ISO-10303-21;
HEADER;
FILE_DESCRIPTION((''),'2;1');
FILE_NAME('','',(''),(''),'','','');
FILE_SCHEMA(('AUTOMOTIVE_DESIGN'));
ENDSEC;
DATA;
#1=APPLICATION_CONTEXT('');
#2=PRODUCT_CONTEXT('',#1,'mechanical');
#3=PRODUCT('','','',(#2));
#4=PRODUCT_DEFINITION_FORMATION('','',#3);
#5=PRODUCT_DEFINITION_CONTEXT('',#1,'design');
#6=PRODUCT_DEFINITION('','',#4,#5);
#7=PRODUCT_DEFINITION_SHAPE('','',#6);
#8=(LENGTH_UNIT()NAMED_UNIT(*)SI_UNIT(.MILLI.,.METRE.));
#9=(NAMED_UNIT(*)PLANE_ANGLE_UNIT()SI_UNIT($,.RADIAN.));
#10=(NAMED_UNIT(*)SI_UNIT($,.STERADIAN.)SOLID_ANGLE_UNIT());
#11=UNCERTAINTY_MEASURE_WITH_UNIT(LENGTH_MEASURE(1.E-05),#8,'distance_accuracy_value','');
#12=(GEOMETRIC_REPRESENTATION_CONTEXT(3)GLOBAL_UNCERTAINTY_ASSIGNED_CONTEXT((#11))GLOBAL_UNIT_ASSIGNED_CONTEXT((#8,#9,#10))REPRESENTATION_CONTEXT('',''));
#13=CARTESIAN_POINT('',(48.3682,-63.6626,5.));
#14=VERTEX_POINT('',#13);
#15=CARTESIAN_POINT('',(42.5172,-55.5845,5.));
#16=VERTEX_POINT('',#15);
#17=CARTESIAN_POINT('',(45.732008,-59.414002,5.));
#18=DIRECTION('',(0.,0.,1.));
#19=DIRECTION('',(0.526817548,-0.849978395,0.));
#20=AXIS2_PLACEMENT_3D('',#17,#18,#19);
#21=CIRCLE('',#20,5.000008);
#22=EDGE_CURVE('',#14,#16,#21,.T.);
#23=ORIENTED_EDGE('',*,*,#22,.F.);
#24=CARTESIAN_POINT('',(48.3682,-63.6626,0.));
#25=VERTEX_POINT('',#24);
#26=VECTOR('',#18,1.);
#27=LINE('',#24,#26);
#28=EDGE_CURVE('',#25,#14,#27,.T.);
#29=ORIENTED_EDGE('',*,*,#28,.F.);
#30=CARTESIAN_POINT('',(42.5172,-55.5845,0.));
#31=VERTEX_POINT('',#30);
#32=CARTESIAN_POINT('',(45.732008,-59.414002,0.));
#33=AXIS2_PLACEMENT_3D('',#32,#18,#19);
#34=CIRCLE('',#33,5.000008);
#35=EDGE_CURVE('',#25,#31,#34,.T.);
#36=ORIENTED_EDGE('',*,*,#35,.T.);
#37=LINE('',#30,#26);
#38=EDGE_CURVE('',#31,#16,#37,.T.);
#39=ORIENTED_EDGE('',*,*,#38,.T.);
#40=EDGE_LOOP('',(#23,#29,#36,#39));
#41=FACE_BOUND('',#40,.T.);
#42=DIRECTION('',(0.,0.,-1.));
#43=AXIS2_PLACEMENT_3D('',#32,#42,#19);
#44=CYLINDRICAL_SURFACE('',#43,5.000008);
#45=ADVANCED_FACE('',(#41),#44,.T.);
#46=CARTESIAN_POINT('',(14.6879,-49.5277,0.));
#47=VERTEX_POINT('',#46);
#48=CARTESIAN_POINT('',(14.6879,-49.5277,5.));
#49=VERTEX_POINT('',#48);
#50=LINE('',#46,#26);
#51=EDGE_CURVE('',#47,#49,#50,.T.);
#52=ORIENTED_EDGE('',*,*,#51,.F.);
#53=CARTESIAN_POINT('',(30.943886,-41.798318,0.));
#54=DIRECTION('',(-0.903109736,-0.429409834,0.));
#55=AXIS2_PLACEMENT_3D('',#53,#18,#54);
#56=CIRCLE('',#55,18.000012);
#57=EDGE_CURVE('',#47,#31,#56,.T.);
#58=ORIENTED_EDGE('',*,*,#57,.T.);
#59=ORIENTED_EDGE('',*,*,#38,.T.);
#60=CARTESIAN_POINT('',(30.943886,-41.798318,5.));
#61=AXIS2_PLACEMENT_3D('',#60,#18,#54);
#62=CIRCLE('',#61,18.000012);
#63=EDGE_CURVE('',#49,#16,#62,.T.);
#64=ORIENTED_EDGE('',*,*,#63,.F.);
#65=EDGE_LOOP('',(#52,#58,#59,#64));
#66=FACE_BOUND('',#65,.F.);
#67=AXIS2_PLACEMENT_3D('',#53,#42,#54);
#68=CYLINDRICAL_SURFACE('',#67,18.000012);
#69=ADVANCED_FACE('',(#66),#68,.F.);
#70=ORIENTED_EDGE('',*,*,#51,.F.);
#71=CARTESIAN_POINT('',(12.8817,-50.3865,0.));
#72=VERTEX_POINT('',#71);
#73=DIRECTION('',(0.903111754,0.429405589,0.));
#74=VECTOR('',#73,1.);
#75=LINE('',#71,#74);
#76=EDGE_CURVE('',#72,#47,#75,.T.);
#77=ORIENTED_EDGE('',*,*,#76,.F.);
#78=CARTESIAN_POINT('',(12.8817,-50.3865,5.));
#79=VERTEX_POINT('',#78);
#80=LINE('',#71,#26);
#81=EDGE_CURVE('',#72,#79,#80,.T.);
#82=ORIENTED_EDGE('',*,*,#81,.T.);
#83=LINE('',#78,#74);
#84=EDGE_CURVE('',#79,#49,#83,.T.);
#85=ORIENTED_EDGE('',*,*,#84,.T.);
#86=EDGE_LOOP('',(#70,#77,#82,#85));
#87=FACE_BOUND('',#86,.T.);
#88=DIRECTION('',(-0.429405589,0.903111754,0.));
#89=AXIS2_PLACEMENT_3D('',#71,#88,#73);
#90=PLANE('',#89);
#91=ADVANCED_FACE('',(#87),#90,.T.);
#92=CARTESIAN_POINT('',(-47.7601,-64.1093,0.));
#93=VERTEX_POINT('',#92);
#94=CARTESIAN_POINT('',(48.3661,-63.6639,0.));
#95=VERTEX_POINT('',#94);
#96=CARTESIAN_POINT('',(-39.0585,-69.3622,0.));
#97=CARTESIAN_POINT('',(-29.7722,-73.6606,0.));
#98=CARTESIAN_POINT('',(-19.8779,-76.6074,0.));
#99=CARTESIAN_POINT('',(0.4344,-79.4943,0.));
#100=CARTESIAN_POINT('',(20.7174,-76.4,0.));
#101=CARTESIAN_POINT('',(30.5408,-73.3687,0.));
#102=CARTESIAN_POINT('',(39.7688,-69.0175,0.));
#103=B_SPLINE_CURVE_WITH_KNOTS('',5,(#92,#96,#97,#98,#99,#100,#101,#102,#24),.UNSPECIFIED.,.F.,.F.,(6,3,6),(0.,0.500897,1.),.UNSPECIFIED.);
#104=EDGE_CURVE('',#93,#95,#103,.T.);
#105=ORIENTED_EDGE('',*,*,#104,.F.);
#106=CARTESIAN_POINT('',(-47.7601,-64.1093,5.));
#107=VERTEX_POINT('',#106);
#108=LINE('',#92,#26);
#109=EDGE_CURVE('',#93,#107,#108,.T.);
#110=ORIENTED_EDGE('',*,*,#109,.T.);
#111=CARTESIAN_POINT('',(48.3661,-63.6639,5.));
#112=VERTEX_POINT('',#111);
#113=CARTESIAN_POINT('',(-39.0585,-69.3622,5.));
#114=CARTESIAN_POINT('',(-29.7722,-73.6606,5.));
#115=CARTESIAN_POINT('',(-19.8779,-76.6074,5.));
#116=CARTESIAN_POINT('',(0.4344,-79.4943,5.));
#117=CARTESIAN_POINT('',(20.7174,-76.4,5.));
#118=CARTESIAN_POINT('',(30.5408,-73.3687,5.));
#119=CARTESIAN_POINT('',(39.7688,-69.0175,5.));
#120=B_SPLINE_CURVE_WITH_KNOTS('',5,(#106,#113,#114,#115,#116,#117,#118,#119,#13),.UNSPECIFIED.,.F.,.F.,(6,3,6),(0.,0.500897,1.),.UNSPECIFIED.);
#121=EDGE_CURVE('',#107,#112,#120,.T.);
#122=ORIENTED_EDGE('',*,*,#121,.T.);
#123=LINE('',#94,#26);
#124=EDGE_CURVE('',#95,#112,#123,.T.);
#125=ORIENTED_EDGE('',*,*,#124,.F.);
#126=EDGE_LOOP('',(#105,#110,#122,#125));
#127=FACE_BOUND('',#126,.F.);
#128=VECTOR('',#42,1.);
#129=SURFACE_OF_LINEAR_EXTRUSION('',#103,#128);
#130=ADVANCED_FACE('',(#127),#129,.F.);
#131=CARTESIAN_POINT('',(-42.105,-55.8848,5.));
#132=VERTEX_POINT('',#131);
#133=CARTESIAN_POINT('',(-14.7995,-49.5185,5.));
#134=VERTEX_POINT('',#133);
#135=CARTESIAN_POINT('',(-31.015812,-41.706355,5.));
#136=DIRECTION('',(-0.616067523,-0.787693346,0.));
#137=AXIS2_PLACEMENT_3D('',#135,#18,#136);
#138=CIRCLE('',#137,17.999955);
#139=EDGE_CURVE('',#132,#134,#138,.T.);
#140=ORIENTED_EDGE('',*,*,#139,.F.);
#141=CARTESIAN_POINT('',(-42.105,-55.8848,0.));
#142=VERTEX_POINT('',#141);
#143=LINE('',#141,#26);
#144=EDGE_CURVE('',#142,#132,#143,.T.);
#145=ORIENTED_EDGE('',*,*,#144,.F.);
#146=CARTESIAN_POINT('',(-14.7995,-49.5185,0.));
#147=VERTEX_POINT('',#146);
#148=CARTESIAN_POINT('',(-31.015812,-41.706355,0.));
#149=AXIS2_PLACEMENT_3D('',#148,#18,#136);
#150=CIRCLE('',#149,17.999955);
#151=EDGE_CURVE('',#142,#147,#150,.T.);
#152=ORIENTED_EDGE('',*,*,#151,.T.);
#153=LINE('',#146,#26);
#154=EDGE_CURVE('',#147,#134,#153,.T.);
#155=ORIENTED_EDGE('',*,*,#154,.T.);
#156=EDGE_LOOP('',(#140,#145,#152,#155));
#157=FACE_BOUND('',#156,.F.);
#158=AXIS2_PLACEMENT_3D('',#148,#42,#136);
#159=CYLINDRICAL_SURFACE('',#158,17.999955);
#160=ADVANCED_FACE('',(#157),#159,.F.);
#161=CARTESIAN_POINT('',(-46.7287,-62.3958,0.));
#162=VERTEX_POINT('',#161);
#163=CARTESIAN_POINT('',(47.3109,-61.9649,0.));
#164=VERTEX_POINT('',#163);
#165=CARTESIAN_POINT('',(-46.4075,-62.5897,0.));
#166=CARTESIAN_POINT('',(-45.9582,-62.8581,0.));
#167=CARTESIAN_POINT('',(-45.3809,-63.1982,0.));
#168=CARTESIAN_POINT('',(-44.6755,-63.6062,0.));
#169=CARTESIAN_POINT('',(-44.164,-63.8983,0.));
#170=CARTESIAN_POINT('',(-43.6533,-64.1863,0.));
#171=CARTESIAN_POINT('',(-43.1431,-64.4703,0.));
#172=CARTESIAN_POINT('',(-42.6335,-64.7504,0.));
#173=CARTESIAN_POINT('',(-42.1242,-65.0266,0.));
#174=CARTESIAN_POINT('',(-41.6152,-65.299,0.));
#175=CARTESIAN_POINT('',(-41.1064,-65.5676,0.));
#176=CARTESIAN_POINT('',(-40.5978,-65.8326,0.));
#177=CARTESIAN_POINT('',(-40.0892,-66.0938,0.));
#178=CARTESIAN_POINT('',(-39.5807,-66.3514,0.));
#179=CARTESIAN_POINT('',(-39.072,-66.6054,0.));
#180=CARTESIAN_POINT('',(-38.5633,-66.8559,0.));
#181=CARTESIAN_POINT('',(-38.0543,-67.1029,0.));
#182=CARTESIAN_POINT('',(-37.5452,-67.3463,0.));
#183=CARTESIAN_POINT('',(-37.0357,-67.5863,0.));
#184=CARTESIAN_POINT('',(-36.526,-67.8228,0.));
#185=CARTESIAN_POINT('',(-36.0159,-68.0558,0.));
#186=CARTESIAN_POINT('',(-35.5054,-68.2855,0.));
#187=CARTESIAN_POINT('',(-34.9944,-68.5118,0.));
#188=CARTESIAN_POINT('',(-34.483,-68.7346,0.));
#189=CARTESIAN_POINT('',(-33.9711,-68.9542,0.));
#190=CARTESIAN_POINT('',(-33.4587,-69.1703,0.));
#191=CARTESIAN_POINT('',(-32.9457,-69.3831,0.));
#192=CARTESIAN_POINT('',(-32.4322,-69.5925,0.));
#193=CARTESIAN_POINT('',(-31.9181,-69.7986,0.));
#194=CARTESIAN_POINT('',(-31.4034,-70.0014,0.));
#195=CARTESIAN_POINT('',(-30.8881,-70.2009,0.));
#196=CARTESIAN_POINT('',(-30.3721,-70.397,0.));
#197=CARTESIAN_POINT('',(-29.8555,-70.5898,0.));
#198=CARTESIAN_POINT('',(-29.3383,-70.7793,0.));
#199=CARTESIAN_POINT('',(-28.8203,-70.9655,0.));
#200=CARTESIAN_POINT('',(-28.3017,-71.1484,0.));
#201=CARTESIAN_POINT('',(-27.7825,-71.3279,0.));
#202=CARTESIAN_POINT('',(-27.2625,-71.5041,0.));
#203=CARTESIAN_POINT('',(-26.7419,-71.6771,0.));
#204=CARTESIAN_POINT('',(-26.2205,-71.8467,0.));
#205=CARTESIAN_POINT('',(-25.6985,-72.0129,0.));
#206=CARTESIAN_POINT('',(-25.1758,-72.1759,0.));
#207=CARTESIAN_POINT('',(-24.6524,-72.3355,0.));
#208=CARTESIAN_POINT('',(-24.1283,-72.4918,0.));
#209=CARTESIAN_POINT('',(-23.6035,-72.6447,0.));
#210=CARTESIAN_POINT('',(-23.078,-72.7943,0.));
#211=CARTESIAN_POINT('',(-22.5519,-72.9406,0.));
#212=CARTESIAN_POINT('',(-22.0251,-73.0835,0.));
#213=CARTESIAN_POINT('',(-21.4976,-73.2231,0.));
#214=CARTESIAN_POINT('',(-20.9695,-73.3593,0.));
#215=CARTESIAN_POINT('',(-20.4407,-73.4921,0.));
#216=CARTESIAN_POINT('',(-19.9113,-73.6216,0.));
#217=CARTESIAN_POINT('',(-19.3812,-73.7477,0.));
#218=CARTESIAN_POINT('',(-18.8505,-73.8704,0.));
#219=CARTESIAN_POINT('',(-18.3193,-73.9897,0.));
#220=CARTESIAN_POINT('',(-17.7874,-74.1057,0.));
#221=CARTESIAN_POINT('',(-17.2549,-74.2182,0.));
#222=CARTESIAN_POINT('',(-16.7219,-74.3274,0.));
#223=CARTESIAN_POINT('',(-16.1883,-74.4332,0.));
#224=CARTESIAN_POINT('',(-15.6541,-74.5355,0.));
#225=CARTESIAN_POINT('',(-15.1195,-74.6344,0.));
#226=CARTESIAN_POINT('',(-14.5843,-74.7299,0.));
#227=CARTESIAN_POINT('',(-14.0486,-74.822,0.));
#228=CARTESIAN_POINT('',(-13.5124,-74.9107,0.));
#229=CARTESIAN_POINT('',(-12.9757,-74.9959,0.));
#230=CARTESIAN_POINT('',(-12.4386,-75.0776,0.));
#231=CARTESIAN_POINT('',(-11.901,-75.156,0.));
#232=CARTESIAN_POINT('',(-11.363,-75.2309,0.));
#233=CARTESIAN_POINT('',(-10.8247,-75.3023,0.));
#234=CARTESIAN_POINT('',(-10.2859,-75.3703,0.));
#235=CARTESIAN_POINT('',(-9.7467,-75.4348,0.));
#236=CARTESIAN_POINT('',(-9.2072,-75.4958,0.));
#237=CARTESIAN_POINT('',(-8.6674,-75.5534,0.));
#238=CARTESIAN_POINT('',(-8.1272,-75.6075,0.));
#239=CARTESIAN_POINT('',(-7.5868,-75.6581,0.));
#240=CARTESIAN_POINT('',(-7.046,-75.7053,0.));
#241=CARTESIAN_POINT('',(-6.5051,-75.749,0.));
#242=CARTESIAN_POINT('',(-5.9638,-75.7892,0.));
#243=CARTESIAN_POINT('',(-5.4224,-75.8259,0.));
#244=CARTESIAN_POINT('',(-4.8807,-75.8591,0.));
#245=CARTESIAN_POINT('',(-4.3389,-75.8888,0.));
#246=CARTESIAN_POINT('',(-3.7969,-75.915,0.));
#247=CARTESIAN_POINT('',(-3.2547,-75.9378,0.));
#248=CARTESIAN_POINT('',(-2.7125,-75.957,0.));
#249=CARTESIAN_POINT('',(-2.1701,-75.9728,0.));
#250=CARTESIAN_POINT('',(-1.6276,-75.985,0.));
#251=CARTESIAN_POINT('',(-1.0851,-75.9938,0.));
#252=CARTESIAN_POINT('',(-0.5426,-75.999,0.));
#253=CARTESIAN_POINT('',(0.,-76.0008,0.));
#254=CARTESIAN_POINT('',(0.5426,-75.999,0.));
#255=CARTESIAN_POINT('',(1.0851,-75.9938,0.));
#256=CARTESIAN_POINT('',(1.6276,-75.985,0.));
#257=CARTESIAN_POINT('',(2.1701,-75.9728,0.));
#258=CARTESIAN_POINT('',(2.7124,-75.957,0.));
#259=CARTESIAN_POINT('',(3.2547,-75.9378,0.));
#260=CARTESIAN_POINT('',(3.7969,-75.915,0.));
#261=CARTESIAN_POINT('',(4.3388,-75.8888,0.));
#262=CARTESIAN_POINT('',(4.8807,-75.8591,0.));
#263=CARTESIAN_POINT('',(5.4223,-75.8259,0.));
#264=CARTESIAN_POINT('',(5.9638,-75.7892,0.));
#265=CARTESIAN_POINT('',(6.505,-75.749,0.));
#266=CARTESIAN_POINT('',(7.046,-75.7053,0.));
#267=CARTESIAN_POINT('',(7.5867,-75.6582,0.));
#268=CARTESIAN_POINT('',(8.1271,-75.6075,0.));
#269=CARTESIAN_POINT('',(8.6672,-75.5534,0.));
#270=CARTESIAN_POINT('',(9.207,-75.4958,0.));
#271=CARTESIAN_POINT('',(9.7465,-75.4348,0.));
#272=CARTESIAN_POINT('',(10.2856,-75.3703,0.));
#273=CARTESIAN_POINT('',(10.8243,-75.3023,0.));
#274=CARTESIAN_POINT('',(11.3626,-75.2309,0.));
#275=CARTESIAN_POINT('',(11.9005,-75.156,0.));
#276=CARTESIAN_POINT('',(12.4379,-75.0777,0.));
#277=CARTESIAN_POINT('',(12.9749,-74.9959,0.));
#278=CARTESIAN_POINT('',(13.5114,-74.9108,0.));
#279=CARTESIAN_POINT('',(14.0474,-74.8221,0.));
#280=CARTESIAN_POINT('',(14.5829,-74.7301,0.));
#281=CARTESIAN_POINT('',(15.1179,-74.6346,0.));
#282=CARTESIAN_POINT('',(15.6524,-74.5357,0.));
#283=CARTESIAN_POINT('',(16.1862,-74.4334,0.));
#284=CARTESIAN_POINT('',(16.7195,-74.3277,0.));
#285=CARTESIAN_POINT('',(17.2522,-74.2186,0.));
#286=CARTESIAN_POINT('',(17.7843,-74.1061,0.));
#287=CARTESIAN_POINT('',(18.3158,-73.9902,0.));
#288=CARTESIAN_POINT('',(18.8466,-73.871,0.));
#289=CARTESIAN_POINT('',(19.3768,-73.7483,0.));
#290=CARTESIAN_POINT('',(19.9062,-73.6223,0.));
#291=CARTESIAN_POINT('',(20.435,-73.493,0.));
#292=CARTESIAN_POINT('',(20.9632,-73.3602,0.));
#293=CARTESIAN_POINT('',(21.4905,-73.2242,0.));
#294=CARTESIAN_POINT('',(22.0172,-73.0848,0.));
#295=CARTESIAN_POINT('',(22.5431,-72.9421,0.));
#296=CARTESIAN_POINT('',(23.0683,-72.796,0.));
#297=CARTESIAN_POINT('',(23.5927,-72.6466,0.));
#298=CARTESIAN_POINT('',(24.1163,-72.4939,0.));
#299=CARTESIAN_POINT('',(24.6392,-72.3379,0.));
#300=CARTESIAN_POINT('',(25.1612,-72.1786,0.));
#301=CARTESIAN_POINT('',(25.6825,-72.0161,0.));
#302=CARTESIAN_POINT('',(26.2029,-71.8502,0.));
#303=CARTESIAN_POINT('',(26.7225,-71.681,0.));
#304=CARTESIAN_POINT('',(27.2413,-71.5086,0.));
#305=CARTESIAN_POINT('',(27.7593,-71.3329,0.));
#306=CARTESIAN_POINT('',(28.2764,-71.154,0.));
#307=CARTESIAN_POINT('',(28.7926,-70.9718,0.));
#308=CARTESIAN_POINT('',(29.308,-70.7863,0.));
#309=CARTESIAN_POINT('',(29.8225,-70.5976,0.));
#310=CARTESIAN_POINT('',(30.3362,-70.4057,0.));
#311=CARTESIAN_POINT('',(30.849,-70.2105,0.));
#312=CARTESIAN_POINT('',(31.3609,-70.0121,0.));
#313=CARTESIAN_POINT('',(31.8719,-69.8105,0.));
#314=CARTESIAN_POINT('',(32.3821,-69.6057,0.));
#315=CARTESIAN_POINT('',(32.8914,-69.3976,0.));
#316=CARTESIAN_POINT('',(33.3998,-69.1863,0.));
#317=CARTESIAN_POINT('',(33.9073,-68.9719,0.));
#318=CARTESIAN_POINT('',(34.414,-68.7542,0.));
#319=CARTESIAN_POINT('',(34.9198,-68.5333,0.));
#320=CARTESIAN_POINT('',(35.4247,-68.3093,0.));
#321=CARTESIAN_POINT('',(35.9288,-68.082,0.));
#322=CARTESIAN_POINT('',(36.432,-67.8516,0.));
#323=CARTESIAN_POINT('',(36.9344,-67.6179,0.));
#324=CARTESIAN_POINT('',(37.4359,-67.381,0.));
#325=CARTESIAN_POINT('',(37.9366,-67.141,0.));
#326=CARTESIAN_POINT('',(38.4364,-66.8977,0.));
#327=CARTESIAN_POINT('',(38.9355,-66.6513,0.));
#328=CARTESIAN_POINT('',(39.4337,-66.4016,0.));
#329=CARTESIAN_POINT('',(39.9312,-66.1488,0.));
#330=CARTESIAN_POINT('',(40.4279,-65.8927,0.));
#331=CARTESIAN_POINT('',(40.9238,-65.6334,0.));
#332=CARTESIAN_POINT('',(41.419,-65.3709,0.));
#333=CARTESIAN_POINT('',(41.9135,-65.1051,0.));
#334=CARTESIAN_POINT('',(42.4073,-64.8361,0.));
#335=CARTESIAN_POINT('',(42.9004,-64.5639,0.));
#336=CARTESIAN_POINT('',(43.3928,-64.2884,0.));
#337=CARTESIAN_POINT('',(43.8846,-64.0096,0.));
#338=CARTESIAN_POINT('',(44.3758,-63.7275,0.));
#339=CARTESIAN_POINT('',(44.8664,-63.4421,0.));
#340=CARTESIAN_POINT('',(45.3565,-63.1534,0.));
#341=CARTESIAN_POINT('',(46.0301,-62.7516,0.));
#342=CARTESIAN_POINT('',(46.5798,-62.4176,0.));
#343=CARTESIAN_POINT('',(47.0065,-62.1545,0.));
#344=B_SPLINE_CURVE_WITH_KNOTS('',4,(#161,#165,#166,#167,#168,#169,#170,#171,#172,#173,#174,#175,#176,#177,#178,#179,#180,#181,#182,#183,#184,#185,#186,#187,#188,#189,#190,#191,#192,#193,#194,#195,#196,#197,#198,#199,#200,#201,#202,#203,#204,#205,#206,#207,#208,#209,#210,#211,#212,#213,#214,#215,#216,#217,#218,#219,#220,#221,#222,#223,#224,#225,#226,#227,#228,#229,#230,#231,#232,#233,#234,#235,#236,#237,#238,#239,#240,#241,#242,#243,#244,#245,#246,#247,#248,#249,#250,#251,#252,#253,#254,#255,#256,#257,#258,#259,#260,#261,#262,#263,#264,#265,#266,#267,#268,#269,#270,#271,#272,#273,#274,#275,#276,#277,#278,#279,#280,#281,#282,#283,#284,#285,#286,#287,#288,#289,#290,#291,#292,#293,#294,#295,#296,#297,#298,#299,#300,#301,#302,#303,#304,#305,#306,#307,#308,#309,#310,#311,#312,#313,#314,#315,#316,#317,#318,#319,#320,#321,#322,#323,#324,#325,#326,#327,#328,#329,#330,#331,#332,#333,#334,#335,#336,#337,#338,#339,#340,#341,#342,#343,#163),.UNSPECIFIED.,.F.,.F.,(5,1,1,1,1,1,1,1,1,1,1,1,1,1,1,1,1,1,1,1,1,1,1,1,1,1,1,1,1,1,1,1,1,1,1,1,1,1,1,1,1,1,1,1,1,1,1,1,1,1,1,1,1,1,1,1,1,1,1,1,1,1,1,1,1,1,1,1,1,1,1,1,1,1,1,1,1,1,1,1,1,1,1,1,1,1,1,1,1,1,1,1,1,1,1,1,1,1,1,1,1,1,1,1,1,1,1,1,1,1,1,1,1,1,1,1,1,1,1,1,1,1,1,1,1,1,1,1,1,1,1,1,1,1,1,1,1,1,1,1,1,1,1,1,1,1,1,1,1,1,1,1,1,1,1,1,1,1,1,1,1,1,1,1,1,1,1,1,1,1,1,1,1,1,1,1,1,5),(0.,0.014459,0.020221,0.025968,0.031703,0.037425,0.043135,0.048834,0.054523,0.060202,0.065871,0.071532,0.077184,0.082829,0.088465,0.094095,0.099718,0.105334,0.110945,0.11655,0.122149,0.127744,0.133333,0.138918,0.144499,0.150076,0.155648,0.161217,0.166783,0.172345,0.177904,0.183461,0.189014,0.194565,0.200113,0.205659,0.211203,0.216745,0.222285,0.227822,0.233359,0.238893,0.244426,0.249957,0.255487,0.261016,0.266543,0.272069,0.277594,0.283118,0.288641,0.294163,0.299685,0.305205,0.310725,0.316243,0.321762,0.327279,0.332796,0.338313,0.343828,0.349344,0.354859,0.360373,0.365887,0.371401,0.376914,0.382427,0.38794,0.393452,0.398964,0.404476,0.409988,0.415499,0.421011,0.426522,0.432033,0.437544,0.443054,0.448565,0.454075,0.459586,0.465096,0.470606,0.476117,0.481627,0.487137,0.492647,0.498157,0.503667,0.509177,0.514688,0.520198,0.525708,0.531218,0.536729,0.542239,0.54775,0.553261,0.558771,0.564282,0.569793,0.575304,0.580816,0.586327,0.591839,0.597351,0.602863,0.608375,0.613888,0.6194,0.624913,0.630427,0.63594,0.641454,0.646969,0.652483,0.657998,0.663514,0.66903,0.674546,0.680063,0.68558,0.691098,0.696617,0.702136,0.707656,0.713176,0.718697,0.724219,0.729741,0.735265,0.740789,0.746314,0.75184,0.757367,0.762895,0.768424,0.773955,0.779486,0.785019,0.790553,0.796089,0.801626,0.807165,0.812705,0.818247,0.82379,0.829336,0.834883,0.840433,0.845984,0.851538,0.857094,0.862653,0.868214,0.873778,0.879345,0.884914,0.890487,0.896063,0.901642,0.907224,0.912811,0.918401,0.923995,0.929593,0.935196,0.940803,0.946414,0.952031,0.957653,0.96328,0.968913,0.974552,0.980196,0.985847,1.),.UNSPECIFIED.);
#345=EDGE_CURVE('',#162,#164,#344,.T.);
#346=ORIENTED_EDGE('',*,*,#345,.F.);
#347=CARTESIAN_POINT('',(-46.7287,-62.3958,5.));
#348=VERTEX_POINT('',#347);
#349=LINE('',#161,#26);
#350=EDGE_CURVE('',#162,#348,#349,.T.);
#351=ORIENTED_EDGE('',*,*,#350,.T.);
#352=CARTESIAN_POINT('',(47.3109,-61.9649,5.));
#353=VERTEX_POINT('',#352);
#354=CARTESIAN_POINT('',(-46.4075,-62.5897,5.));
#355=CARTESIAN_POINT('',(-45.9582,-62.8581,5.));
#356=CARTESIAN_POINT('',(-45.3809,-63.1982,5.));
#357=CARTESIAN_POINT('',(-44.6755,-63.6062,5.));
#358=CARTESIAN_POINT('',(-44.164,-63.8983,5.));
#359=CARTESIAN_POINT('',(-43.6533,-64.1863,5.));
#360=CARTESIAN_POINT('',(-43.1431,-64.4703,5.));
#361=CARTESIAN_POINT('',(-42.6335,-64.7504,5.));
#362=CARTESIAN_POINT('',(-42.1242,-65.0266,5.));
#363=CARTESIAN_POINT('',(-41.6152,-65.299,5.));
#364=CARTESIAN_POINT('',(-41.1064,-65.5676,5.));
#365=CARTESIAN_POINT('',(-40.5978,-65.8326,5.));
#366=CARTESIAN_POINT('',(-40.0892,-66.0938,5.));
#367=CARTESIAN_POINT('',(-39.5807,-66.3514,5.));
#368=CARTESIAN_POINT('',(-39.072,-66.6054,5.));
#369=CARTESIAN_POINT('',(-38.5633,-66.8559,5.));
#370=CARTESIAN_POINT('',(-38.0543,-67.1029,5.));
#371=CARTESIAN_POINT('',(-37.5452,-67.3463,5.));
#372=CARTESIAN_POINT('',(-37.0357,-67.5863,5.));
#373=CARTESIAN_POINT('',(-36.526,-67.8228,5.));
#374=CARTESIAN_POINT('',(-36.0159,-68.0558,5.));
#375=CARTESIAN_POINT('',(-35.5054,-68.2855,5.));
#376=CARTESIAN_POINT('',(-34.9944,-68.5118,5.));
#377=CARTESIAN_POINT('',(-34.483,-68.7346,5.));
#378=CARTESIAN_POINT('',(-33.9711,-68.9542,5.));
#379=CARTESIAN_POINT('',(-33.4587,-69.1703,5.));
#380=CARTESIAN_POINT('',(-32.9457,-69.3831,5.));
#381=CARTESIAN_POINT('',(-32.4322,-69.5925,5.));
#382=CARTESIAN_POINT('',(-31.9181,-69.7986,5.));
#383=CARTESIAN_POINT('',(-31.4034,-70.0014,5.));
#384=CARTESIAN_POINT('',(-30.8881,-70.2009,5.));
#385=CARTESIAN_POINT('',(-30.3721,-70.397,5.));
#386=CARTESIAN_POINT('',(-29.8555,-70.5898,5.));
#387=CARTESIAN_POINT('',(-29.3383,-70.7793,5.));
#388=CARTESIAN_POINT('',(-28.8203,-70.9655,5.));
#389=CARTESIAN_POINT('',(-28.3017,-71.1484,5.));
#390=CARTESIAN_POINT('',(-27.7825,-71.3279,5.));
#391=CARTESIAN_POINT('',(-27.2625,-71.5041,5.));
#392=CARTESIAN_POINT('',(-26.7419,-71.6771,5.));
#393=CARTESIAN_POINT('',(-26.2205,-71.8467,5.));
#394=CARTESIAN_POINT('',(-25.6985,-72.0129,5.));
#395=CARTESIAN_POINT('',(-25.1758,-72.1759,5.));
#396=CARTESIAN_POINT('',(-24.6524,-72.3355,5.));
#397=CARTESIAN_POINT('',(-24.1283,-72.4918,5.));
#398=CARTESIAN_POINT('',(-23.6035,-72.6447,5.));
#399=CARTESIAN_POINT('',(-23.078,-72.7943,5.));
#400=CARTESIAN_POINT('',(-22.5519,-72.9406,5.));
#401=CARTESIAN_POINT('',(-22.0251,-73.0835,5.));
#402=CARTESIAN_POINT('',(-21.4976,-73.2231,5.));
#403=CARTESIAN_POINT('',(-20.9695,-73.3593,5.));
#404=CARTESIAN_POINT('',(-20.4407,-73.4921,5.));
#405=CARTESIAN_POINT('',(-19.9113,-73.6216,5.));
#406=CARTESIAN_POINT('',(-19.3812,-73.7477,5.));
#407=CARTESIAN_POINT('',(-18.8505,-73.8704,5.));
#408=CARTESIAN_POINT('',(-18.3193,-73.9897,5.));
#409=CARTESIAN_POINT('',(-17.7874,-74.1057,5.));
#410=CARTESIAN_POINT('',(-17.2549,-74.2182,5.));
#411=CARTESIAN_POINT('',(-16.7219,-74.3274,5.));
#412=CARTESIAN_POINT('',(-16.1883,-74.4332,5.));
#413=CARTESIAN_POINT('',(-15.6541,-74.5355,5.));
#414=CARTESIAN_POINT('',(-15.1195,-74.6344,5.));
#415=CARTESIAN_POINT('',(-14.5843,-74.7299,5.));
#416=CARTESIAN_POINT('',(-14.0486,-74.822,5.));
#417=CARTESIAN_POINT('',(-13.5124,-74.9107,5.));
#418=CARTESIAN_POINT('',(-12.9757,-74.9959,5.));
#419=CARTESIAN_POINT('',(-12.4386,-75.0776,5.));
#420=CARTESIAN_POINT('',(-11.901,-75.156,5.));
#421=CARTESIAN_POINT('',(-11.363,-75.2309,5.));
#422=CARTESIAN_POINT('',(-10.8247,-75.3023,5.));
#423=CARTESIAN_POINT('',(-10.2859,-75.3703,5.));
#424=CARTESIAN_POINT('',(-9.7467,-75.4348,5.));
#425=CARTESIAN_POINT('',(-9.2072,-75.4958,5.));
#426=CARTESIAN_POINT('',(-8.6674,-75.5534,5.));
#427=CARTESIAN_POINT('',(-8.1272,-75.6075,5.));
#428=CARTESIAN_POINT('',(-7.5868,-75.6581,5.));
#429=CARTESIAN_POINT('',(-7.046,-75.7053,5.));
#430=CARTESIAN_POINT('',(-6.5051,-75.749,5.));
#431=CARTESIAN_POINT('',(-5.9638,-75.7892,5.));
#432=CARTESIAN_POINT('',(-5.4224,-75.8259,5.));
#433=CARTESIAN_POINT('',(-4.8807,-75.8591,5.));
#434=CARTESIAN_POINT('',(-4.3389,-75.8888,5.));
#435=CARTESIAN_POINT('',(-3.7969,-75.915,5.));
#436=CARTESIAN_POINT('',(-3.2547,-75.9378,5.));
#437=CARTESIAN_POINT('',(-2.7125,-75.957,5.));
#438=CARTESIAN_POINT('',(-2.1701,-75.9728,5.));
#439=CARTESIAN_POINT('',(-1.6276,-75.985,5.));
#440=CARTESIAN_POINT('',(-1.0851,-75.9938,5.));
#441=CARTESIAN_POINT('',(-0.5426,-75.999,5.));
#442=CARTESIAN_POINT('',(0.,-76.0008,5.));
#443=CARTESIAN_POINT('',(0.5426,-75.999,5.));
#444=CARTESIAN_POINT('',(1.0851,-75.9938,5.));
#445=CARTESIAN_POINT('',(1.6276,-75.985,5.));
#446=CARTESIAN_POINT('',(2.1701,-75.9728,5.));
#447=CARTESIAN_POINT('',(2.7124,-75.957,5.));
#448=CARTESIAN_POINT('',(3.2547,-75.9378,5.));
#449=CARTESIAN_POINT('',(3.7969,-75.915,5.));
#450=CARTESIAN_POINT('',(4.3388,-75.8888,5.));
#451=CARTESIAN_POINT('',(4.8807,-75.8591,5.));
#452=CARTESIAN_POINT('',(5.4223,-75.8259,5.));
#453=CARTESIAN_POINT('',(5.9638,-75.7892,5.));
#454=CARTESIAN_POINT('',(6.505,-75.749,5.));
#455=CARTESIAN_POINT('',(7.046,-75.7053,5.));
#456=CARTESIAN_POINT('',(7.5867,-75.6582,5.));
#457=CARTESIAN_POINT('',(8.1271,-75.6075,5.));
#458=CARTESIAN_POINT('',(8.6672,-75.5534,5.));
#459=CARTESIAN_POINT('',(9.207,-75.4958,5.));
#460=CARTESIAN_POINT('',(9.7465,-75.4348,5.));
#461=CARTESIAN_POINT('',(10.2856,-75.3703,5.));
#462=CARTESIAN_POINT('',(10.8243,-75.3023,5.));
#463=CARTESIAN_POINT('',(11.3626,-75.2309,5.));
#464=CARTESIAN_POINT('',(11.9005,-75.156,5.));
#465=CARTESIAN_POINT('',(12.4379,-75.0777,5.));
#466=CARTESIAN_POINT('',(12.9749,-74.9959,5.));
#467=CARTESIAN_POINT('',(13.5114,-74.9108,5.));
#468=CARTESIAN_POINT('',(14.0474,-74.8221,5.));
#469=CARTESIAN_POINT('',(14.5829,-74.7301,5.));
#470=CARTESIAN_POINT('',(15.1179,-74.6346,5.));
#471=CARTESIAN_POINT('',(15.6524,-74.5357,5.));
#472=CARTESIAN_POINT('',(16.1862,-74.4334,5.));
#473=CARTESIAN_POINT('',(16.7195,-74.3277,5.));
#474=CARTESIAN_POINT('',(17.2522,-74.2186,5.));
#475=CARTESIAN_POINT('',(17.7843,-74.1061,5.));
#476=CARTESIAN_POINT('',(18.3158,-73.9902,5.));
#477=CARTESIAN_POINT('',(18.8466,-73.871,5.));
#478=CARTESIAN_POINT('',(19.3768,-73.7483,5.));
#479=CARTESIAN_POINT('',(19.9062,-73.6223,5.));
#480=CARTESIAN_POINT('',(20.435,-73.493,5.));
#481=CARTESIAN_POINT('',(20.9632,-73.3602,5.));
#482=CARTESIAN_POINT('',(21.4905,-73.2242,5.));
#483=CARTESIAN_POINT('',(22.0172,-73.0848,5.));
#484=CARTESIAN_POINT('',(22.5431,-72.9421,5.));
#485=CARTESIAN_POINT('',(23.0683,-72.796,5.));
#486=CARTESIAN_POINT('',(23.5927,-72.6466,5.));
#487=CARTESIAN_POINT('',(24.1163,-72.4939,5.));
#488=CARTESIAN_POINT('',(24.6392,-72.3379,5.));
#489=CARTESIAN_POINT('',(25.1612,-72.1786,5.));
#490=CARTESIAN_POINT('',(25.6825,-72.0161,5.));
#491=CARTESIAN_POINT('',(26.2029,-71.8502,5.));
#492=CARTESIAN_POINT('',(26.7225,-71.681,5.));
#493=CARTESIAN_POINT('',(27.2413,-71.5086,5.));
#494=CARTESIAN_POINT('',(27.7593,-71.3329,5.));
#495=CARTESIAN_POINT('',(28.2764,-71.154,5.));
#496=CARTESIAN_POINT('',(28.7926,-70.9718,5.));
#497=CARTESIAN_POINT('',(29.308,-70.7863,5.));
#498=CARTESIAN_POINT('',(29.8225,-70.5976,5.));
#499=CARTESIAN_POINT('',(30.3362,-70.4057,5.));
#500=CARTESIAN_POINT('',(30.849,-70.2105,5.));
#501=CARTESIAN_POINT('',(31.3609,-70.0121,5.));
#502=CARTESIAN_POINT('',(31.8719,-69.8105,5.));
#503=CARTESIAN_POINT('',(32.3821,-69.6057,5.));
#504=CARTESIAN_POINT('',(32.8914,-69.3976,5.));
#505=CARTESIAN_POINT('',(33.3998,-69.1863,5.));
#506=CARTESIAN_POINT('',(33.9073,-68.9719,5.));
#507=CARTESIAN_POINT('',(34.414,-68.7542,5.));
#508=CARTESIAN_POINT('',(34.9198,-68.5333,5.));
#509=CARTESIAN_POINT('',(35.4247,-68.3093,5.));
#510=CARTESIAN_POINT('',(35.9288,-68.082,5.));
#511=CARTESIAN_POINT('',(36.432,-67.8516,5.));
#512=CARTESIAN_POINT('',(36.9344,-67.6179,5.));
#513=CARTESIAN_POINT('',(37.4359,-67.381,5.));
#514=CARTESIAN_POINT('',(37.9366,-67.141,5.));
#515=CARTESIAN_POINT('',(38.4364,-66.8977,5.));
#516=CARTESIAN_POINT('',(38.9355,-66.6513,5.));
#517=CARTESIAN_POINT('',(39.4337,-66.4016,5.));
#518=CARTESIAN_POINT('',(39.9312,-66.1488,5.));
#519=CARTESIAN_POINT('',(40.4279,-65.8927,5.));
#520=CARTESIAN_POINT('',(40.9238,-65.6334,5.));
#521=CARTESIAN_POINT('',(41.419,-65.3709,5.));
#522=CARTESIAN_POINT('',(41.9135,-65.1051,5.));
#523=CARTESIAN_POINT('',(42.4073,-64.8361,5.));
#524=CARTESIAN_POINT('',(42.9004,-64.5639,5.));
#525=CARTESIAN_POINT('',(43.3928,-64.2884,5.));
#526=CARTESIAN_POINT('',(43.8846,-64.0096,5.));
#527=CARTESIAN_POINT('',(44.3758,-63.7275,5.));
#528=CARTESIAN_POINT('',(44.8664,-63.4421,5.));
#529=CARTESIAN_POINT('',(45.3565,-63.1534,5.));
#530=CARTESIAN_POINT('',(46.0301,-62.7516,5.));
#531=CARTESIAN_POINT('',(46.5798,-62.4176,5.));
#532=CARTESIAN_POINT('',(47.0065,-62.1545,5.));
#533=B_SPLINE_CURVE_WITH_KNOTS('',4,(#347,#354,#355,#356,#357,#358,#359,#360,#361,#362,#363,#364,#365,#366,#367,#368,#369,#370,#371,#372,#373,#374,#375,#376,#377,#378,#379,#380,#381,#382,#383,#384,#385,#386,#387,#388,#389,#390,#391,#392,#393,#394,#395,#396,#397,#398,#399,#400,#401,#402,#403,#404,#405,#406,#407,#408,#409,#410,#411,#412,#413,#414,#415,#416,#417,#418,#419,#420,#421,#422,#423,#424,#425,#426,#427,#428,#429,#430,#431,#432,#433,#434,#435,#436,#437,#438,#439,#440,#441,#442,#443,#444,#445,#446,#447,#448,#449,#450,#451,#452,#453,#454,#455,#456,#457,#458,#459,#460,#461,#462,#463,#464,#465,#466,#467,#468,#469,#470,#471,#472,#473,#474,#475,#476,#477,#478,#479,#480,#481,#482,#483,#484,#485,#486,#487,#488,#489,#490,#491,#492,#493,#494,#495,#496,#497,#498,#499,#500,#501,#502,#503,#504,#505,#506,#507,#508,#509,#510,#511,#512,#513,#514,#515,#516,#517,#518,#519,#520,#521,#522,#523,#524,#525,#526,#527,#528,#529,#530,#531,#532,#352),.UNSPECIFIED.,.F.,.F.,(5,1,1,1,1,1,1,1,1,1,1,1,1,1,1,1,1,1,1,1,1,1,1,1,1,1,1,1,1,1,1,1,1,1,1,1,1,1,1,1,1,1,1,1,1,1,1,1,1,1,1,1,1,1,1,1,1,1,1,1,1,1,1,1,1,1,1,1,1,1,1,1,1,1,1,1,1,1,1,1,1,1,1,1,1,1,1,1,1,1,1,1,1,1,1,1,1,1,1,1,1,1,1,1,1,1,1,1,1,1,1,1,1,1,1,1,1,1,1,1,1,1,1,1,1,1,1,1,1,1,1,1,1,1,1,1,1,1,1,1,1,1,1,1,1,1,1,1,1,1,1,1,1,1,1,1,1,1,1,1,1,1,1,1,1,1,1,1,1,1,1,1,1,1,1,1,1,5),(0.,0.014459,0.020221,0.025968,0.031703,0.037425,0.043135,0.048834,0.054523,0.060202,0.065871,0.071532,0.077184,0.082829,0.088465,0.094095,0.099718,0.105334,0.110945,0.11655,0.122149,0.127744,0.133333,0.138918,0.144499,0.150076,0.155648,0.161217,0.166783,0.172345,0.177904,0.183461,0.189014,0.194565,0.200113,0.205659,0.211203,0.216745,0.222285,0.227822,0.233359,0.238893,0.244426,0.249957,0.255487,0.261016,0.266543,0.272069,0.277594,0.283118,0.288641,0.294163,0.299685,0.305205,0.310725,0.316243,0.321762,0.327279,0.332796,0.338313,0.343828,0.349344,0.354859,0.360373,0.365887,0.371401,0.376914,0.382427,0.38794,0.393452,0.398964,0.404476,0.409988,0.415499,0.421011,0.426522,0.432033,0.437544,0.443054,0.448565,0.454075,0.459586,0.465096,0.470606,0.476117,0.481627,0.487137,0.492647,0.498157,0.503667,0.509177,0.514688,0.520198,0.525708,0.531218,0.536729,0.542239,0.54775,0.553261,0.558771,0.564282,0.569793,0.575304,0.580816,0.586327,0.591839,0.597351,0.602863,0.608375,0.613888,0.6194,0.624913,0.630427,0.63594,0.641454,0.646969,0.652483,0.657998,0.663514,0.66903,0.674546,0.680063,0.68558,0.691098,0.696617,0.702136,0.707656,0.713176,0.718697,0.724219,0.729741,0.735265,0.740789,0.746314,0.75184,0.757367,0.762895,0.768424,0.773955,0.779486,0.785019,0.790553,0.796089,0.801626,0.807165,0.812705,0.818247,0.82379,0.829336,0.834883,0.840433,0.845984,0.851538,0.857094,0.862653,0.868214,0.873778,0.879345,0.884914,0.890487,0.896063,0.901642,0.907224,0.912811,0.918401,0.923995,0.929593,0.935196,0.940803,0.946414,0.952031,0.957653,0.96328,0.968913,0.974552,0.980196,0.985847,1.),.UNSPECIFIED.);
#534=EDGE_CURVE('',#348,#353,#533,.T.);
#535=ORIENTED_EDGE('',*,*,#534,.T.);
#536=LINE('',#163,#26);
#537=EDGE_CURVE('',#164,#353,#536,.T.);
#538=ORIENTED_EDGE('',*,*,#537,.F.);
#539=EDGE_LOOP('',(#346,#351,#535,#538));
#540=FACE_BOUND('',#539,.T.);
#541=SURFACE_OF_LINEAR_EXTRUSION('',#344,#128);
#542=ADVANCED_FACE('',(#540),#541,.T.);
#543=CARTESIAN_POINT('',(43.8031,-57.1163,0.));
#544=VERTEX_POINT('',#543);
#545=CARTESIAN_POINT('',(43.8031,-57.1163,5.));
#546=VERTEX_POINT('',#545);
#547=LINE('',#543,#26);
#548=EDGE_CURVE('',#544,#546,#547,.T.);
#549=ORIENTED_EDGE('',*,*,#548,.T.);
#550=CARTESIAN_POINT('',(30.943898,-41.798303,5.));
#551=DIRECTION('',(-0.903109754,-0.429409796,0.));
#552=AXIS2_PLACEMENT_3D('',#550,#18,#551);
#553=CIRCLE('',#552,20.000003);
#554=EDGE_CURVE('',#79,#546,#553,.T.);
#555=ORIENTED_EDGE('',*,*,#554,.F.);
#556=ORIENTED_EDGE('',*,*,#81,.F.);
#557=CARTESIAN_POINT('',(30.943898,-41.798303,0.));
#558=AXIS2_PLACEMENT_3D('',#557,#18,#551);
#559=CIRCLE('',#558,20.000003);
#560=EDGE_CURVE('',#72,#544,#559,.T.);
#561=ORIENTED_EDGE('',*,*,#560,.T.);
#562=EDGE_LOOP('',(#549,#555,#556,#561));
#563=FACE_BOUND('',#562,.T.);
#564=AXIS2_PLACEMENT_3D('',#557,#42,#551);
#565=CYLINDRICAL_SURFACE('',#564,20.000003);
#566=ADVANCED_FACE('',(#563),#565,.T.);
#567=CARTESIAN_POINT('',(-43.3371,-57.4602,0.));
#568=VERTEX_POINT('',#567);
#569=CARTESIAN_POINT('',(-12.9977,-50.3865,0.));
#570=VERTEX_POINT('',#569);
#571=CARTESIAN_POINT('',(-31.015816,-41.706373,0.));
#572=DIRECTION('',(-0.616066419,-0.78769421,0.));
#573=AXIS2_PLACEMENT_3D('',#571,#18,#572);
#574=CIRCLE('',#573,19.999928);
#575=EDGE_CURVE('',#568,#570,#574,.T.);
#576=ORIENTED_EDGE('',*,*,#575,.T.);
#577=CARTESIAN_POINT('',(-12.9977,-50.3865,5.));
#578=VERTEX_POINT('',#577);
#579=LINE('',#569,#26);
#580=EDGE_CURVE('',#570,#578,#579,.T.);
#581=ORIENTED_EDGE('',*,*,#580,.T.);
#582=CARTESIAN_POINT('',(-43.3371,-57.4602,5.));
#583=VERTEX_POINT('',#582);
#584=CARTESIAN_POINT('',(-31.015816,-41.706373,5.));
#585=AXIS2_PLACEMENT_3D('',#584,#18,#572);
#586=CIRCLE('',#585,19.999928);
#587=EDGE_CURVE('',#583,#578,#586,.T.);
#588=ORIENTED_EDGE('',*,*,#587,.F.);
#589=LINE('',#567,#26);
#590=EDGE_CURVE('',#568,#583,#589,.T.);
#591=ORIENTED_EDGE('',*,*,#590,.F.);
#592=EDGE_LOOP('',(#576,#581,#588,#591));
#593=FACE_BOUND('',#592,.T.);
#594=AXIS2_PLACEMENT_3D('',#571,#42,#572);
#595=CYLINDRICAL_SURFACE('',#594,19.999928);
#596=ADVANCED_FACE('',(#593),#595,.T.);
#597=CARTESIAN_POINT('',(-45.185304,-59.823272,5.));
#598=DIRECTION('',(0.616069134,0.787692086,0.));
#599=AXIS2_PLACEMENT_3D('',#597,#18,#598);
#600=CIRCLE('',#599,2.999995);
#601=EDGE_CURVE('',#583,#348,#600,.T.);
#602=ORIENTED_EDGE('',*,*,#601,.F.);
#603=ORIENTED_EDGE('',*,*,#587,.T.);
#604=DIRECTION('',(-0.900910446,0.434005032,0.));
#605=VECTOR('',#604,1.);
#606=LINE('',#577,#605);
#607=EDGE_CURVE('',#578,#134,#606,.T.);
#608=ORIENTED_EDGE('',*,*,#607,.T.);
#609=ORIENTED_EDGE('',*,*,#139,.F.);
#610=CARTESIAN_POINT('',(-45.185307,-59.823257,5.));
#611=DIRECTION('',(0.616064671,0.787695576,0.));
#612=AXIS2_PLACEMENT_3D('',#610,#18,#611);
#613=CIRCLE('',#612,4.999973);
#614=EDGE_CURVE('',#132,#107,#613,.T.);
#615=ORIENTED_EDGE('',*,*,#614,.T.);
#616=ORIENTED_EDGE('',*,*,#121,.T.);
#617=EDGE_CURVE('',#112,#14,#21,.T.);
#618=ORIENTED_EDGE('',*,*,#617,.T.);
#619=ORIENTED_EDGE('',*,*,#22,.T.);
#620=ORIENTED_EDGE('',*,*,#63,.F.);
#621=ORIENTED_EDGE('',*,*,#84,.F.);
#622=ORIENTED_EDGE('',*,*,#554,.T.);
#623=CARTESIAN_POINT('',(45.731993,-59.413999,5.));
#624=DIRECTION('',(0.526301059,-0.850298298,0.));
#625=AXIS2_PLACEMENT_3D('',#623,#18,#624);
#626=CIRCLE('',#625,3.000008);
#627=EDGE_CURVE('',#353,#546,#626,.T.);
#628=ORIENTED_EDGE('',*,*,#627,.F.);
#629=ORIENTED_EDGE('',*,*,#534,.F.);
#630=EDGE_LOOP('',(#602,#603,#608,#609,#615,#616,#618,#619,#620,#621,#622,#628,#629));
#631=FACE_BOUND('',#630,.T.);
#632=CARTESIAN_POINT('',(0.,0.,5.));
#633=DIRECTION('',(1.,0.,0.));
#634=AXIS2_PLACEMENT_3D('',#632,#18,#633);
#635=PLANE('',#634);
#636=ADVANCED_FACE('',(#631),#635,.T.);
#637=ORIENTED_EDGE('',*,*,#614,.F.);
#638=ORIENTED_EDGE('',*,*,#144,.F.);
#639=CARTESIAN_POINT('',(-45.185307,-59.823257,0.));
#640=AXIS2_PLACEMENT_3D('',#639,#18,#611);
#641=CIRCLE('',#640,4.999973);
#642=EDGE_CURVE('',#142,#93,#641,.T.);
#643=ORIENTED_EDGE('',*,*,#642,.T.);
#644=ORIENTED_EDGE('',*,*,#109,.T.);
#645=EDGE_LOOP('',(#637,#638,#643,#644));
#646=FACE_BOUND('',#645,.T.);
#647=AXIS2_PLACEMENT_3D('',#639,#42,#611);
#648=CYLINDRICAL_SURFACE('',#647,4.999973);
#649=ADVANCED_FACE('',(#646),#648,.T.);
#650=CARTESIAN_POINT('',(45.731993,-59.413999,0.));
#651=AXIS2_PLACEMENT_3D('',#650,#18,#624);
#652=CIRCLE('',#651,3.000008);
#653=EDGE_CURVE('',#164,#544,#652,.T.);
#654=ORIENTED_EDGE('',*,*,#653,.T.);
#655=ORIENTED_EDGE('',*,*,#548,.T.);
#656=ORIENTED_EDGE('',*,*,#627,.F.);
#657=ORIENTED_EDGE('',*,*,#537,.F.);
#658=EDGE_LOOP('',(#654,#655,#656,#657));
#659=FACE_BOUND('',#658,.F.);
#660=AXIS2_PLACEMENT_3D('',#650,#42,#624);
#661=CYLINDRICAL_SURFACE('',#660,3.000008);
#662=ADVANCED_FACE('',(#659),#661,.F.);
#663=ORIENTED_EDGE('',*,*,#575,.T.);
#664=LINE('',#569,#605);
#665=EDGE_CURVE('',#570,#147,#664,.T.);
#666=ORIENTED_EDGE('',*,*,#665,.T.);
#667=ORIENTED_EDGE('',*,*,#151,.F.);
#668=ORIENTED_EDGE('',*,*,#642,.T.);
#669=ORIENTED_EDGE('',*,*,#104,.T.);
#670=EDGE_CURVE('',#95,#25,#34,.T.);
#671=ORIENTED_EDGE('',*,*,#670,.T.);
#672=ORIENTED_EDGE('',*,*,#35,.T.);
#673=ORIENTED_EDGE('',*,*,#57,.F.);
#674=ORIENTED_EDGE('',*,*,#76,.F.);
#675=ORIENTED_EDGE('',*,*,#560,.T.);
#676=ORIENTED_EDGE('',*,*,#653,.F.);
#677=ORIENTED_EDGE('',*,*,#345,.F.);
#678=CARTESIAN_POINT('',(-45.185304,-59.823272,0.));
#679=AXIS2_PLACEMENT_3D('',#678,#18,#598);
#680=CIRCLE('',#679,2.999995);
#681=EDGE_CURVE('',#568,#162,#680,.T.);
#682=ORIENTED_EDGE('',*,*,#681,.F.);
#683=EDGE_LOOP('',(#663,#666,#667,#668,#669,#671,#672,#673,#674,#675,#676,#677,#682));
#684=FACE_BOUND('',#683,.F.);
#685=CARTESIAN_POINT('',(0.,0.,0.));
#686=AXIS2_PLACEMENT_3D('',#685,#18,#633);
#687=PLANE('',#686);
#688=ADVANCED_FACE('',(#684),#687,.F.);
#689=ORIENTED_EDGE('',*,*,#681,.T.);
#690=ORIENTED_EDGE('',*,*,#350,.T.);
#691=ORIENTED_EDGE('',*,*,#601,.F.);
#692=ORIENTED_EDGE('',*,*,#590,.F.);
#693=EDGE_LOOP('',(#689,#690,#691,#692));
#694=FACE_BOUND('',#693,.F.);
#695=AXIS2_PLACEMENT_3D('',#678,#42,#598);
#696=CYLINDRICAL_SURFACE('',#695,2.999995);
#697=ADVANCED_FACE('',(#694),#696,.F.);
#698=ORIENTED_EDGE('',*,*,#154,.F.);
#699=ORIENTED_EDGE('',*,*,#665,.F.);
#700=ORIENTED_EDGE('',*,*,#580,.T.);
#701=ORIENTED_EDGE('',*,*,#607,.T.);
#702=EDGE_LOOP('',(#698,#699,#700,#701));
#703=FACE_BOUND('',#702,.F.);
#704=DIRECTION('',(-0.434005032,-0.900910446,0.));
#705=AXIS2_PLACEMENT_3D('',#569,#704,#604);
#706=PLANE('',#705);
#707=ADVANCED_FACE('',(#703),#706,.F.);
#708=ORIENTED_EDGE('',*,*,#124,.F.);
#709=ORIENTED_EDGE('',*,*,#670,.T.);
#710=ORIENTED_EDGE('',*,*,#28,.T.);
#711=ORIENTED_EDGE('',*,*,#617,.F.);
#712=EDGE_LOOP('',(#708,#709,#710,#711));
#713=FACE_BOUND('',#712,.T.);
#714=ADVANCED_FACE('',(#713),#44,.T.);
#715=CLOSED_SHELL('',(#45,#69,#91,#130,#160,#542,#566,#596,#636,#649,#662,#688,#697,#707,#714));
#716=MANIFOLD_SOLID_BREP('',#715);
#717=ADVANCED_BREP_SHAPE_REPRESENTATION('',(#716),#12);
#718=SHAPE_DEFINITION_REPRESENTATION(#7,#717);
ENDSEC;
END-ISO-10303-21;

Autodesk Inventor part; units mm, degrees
ref_plane "YZ Plane" through (0, 0, 0) normal (1, 0, 0) x (0, 1, 0)
ref_plane "XZ Plane" through (0, 0, 0) normal (0, 1, 0) x (-1, 0, 0)
ref_plane "XY Plane" through (0, 0, 0) normal (0, 0, 1) x (1, 0, 0)
sketch "スケッチ1" plane through (0, 0, 0) normal (0, 0, 1) x (1, 0, 0)
  spline S0 degree 4 poles (-46.7287, -62.3958) (-46.4075, -62.5897) (-45.9582, -62.8581) (-45.3809, -63.1982) (-44.6755, -63.6062) (-44.164, -63.8983) (-43.6533, -64.1863) (-43.1431, -64.4703) (-42.6335, -64.7504) (-42.1242, -65.0266) (-41.6152, -65.299) (-41.1064, -65.5676) (-40.5978, -65.8326) (-40.0892, -66.0938) (-39.5807, -66.3514) (-39.072, -66.6054) (-38.5633, -66.8559) (-38.0543, -67.1029) (-37.5452, -67.3463) (-37.0357, -67.5863) (-36.526, -67.8228) (-36.0159, -68.0558) (-35.5054, -68.2855) (-34.9944, -68.5118) (-34.483, -68.7346) (-33.9711, -68.9542) (-33.4587, -69.1703) (-32.9457, -69.3831) (-32.4322, -69.5925) (-31.9181, -69.7986) (-31.4034, -70.0014) (-30.8881, -70.2009) (-30.3721, -70.397) (-29.8555, -70.5898) (-29.3383, -70.7793) (-28.8203, -70.9655) (-28.3017, -71.1484) (-27.7825, -71.3279) (-27.2625, -71.5041) (-26.7419, -71.6771) (-26.2205, -71.8467) (-25.6985, -72.0129) (-25.1758, -72.1759) (-24.6524, -72.3355) (-24.1283, -72.4918) (-23.6035, -72.6447) (-23.078, -72.7943) (-22.5519, -72.9406) (-22.0251, -73.0835) (-21.4976, -73.2231) (-20.9695, -73.3593) (-20.4407, -73.4921) (-19.9113, -73.6216) (-19.3812, -73.7477) (-18.8505, -73.8704) (-18.3193, -73.9897) (-17.7874, -74.1057) (-17.2549, -74.2182) (-16.7219, -74.3274) (-16.1883, -74.4332) (-15.6541, -74.5355) (-15.1195, -74.6344) (-14.5843, -74.7299) (-14.0486, -74.822) (-13.5124, -74.9107) (-12.9757, -74.9959) (-12.4386, -75.0776) (-11.901, -75.156) (-11.363, -75.2309) (-10.8247, -75.3023) (-10.2859, -75.3703) (-9.7467, -75.4348) (-9.2072, -75.4958) (-8.6674, -75.5534) (-8.1272, -75.6075) (-7.5868, -75.6581) (-7.046, -75.7053) (-6.5051, -75.749) (-5.9638, -75.7892) (-5.4224, -75.8259) (-4.8807, -75.8591) (-4.3389, -75.8888) (-3.7969, -75.915) (-3.2547, -75.9378) (-2.7125, -75.957) (-2.1701, -75.9728) (-1.6276, -75.985) (-1.0851, -75.9938) (-0.5426, -75.999) (0, -76.0008) (0.5426, -75.999) (1.0851, -75.9938) (1.6276, -75.985) (2.1701, -75.9728) (2.7124, -75.957) (3.2547, -75.9378) (3.7969, -75.915) (4.3388, -75.8888) (4.8807, -75.8591) (5.4223, -75.8259) (5.9638, -75.7892) (6.505, -75.749) (7.046, -75.7053) (7.5867, -75.6582) (8.1271, -75.6075) (8.6672, -75.5534) (9.207, -75.4958) (9.7465, -75.4348) (10.2856, -75.3703) (10.8243, -75.3023) (11.3626, -75.2309) (11.9005, -75.156) (12.4379, -75.0777) (12.9749, -74.9959) (13.5114, -74.9108) (14.0474, -74.8221) (14.5829, -74.7301) (15.1179, -74.6346) (15.6524, -74.5357) (16.1862, -74.4334) (16.7195, -74.3277) (17.2522, -74.2186) (17.7843, -74.1061) (18.3158, -73.9902) (18.8466, -73.871) (19.3768, -73.7483) (19.9062, -73.6223) (20.435, -73.493) (20.9632, -73.3602) (21.4905, -73.2242) (22.0172, -73.0848) (22.5431, -72.9421) (23.0683, -72.796) (23.5927, -72.6466) (24.1163, -72.4939) (24.6392, -72.3379) (25.1612, -72.1786) (25.6825, -72.0161) (26.2029, -71.8502) (26.7225, -71.681) (27.2413, -71.5086) (27.7593, -71.3329) (28.2764, -71.154) (28.7926, -70.9718) (29.308, -70.7863) (29.8225, -70.5976) (30.3362, -70.4057) (30.849, -70.2105) (31.3609, -70.0121) (31.8719, -69.8105) (32.3821, -69.6057) (32.8914, -69.3976) (33.3998, -69.1863) (33.9073, -68.9719) (34.414, -68.7542) (34.9198, -68.5333) (35.4247, -68.3093) (35.9288, -68.082) (36.432, -67.8516) (36.9344, -67.6179) (37.4359, -67.381) (37.9366, -67.141) (38.4364, -66.8977) (38.9355, -66.6513) (39.4337, -66.4016) (39.9312, -66.1488) (40.4279, -65.8927) (40.9238, -65.6334) (41.419, -65.3709) (41.9135, -65.1051) (42.4073, -64.8361) (42.9004, -64.5639) (43.3928, -64.2884) (43.8846, -64.0096) (44.3758, -63.7275) (44.8664, -63.4421) (45.3565, -63.1534) (46.0301, -62.7516) (46.5798, -62.4176) (47.0065, -62.1545) (47.3109, -61.9649) knots 0 0 0 0 0 0.014459 0.020221 0.025968 0.031703 0.037425 0.043135 0.048834 0.054523 0.060202 0.065871 0.071532 0.077184 0.082829 0.088465 0.094095 0.099718 0.105334 0.110945 0.11655 0.122149 0.127744 0.133333 0.138918 0.144499 0.150076 0.155648 0.161217 0.166783 0.172345 0.177904 0.183461 0.189014 0.194565 0.200113 0.205659 0.211203 0.216745 0.222285 0.227822 0.233359 0.238893 0.244426 0.249957 0.255487 0.261016 0.266543 0.272069 0.277594 0.283118 0.288641 0.294163 0.299685 0.305205 0.310725 0.316243 0.321762 0.327279 0.332796 0.338313 0.343828 0.349344 0.354859 0.360373 0.365887 0.371401 0.376914 0.382427 0.38794 0.393452 0.398964 0.404476 0.409988 0.415499 0.421011 0.426522 0.432033 0.437544 0.443054 0.448565 0.454075 0.459586 0.465096 0.470606 0.476117 0.481627 0.487137 0.492647 0.498157 0.503667 0.509177 0.514688 0.520198 0.525708 0.531218 0.536729 0.542239 0.54775 0.553261 0.558771 0.564282 0.569793 0.575304 0.580816 0.586327 0.591839 0.597351 0.602863 0.608375 0.613888 0.6194 0.624913 0.630427 0.63594 0.641454 0.646969 0.652483 0.657998 0.663514 0.66903 0.674546 0.680063 0.68558 0.691098 0.696617 0.702136 0.707656 0.713176 0.718697 0.724219 0.729741 0.735265 0.740789 0.746314 0.75184 0.757367 0.762895 0.768424 0.773955 0.779486 0.785019 0.790553 0.796089 0.801626 0.807165 0.812705 0.818247 0.82379 0.829336 0.834883 0.840433 0.845984 0.851538 0.857094 0.862653 0.868214 0.873778 0.879345 0.884914 0.890487 0.896063 0.901642 0.907224 0.912811 0.918401 0.923995 0.929593 0.935196 0.940803 0.946414 0.952031 0.957653 0.96328 0.968913 0.974552 0.980196 0.985847 1 1 1 1 1
  arc A0 (-43.3371, -57.4602) -> (-46.7287, -62.3958) centre (-45.1853, -59.8233) ccw
  arc A1 (-43.3371, -57.4602) -> (-12.9977, -50.3865) centre (-31.0158, -41.7063) ccw
  arc A2 (12.8817, -50.3865) -> (43.8031, -57.1163) centre (30.9439, -41.7983) ccw
  arc A3 (47.3109, -61.9649) -> (43.8031, -57.1163) centre (45.732, -59.414) ccw
  arc A4 (-42.105, -55.8848) -> (-14.7995, -49.5185) centre (-31.0158, -41.7063) ccw
  arc A5 (-42.105, -55.8848) -> (-47.7601, -64.1093) centre (-45.1853, -59.8233) ccw
  arc A6 (48.3661, -63.6639) -> (42.5172, -55.5845) centre (45.732, -59.414) ccw
  arc A7 (14.6879, -49.5277) -> (42.5172, -55.5845) centre (30.9439, -41.7983) ccw
  line L0 (-12.9977, -50.3865) -> (-14.7995, -49.5185)
  line L1 (12.8817, -50.3865) -> (14.6879, -49.5277)
  spline S1 degree 5 poles (-47.7621, -64.1081) (-39.0585, -69.3622) (-29.7722, -73.6606) (-19.8779, -76.6074) (0.4344, -79.4943) (20.7174, -76.4) (30.5408, -73.3687) (39.7688, -69.0175) (48.3682, -63.6626) knots 0 0 0 0 0 0 0.500897 0.500897 0.500897 1 1 1 1 1 1
  point P0 (0, 0)
  point P1 (0, 0)
  dimension "d0" = 2
extrude "押し出し1" add sketch "スケッチ1" along normal blind 5
properties part number "脚ゴム2" material "ゴム、シリコーン"
